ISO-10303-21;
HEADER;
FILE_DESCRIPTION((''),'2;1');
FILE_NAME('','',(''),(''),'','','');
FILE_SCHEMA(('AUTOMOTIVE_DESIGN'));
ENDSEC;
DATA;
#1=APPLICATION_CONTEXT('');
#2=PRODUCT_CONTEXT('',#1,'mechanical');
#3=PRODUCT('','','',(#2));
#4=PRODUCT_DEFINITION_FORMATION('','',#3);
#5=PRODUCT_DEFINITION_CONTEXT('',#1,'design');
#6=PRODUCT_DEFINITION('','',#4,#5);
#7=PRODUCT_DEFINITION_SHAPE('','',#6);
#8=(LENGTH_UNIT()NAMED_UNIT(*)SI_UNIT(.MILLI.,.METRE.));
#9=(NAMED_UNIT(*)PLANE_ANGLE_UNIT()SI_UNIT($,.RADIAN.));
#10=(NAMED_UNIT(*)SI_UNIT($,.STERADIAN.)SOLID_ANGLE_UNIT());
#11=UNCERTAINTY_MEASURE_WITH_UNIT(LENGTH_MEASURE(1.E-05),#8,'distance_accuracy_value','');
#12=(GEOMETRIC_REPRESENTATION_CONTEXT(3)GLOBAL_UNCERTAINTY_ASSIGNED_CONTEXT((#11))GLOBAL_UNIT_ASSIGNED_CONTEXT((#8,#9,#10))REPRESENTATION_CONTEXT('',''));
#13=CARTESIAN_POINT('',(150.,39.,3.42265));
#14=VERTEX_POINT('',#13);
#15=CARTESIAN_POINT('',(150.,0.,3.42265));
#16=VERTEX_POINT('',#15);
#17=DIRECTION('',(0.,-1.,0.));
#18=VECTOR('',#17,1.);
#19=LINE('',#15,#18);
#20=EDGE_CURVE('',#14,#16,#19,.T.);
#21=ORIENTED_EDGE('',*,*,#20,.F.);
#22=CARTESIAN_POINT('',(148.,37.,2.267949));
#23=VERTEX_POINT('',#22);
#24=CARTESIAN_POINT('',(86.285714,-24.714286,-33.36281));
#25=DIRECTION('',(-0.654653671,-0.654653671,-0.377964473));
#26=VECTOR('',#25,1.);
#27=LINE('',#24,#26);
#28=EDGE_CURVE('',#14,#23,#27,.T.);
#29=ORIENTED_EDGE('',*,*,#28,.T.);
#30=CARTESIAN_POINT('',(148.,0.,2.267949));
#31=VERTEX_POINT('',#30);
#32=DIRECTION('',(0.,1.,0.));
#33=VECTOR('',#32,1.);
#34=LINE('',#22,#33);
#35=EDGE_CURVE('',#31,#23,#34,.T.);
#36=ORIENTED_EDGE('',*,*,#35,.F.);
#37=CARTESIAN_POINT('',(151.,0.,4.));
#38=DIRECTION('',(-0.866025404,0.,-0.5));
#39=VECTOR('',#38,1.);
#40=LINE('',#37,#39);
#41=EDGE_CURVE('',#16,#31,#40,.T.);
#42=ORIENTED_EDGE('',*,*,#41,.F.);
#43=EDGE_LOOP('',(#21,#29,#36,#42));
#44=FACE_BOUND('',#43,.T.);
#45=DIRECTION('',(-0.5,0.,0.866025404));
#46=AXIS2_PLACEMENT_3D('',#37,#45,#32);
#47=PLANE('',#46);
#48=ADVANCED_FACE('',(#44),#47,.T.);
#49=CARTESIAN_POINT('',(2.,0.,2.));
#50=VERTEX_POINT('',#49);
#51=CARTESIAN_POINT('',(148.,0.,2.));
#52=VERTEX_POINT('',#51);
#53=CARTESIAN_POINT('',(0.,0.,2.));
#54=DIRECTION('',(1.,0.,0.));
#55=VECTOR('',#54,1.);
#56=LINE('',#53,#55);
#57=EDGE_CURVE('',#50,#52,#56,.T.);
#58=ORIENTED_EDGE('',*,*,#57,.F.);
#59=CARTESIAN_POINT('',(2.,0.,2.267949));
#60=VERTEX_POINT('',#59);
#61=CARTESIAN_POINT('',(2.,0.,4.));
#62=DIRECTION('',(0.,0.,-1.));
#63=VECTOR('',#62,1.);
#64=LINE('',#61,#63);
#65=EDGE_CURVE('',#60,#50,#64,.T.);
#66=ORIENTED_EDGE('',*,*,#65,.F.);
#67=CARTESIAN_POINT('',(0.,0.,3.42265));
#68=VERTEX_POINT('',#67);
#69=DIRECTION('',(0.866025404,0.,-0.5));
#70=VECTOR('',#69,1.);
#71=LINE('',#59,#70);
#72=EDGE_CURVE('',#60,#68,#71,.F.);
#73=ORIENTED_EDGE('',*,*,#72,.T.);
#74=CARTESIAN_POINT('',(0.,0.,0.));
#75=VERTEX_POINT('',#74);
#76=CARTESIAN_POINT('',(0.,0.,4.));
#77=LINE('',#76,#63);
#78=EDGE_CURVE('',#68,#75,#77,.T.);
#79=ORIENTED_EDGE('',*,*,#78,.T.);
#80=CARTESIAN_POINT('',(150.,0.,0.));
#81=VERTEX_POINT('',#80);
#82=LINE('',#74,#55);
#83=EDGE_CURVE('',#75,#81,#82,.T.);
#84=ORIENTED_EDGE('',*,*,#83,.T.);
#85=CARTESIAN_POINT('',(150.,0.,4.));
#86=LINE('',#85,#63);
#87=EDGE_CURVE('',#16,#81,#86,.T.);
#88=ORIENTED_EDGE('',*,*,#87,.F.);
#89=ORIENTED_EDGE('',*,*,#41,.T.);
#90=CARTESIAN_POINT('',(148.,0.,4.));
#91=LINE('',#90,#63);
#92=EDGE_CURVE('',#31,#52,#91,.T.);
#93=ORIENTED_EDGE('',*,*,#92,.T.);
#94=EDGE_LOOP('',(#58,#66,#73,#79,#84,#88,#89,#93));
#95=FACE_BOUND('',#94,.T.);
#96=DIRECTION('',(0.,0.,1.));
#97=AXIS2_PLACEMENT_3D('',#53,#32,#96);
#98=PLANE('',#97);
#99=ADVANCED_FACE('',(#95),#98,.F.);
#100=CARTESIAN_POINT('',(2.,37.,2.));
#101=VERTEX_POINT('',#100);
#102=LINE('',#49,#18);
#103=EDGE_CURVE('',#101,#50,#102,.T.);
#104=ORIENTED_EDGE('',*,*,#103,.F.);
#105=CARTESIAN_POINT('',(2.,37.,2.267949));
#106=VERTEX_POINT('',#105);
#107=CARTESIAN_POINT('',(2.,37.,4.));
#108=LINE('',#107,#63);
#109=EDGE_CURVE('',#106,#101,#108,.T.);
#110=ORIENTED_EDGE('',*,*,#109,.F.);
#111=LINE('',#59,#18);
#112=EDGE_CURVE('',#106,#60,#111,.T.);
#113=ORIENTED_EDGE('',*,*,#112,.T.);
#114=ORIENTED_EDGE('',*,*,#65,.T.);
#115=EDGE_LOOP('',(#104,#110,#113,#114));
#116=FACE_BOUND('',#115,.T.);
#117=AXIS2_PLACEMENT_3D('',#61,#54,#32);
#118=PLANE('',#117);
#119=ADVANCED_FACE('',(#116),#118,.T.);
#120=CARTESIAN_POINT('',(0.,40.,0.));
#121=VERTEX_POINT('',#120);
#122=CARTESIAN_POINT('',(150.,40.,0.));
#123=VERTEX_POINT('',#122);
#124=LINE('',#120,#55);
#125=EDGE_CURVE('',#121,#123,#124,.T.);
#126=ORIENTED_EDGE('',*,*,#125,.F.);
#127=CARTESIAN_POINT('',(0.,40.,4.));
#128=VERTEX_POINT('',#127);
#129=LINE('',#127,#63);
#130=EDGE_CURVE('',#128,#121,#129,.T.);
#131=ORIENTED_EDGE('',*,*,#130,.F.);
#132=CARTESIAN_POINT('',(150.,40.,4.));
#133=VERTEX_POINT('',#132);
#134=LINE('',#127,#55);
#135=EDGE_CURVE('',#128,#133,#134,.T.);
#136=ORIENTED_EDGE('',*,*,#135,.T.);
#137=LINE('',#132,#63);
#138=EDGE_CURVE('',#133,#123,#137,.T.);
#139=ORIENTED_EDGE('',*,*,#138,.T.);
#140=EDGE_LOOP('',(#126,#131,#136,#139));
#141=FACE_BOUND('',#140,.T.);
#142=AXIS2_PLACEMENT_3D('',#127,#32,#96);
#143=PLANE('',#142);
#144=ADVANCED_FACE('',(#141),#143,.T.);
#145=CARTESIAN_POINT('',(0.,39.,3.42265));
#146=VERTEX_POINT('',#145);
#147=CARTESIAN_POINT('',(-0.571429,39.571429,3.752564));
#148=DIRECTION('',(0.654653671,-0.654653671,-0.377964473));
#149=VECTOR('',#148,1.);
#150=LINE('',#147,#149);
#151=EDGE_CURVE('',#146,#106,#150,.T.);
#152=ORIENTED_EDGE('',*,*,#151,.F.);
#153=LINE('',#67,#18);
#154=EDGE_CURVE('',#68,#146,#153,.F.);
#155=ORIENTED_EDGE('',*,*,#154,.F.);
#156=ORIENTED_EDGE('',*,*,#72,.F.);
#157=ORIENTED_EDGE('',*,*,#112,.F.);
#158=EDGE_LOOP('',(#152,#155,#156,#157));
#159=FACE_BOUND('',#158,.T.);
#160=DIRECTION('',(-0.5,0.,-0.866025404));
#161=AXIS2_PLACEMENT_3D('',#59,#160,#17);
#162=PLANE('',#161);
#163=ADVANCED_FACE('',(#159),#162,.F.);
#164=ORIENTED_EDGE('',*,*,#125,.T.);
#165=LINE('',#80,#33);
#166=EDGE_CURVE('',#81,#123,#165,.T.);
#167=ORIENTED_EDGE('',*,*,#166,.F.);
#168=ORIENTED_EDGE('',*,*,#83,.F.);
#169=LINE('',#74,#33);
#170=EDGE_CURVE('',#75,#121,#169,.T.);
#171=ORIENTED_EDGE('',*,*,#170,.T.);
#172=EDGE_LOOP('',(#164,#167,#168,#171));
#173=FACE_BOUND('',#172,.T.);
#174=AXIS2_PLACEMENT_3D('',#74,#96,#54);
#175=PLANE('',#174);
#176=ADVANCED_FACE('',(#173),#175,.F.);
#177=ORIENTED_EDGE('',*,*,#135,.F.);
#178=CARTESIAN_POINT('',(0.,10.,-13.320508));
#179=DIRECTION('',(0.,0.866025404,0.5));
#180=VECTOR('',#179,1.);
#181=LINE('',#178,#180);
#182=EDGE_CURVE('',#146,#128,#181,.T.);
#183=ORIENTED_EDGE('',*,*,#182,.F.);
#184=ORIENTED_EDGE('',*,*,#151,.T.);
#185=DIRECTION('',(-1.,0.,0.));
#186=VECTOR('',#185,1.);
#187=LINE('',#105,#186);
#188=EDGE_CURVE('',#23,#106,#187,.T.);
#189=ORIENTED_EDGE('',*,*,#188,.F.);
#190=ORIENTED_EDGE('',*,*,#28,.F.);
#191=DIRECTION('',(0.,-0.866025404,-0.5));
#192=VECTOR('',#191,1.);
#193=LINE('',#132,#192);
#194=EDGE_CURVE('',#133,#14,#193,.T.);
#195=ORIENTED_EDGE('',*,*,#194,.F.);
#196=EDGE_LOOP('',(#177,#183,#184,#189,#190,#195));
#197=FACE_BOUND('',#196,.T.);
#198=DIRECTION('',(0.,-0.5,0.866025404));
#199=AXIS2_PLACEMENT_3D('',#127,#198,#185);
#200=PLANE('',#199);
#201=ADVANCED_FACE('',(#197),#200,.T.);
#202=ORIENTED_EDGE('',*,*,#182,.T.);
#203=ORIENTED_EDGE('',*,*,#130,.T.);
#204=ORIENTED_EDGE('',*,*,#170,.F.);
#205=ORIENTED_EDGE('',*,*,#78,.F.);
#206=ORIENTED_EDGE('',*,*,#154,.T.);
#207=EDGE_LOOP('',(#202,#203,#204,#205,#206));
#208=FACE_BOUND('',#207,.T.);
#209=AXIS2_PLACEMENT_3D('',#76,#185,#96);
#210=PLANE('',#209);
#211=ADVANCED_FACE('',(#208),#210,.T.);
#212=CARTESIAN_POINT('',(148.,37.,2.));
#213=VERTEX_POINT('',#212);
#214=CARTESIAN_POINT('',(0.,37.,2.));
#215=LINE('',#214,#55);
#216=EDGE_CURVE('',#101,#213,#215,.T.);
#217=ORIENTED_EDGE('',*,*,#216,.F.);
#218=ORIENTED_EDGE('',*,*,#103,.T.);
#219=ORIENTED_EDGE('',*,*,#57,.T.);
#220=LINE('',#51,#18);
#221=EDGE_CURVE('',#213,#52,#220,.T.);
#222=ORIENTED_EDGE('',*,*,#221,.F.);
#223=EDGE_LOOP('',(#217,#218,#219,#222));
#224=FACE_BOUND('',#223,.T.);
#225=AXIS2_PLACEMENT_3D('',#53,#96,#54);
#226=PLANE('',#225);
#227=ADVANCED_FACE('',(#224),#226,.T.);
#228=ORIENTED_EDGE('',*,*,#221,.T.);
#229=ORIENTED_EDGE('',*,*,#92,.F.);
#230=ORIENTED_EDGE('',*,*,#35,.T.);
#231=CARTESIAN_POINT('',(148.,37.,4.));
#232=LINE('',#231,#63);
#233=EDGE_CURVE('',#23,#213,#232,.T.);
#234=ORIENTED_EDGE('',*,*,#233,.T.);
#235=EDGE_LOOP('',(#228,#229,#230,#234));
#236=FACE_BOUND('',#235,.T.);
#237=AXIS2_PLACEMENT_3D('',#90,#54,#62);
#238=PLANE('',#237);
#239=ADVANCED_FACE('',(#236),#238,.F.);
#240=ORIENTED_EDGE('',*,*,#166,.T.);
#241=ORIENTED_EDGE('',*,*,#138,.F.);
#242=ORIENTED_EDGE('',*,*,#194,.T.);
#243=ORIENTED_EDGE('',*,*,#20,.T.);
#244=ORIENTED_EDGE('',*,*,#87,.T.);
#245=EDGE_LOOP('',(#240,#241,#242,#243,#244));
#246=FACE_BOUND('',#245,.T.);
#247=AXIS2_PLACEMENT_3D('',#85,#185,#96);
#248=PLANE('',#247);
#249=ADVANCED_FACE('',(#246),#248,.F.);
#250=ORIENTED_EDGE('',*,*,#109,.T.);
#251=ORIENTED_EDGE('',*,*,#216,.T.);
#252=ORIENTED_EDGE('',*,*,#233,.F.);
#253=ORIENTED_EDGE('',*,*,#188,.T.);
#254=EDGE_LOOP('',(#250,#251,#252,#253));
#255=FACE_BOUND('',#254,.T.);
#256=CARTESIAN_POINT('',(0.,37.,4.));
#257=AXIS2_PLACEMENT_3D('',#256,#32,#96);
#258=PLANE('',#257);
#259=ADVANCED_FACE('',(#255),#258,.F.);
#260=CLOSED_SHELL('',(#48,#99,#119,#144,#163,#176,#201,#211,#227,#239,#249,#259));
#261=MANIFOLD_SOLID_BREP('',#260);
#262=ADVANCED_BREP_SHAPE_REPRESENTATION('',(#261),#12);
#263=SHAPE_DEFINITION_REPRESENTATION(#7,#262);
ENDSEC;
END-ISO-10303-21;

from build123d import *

# Parameters (mm, degrees)
SKETCH1_W           = 146
SKETCH1_H           = 37
BOSS_EXTRUDE1_DEPTH = 2
BOSS_EXTRUDE2_DEPTH = 4


with BuildPart() as part:
    # Sketch1 → Boss-Extrude1 (new body)
    with BuildSketch(Plane.XY):
        with Locations((75, 18.5)):
            Rectangle(SKETCH1_W, SKETCH1_H)
    extrude(amount=BOSS_EXTRUDE1_DEPTH)

    # Sketch1<4> → Boss-Extrude2 (add)
    with BuildSketch(Plane.XY):
        Polygon((2, 0), (2, 37), (148, 37), (148, 0), (150, 0), (150, 40), (0, 40), (0, 0), align=None)
    extrude(amount=BOSS_EXTRUDE2_DEPTH)

    # Chamfer1
    # the kernel refuses this chamfer: 3, 1.732050808 mm, written as the material it takes off along each edge
    with BuildSketch(Plane(origin=(148, 37, 4), x_dir=(-0.05789386240267211, 0, -0.9983227437537925), z_dir=(0, -1, 0)), Plane(origin=(2, 0, 4), x_dir=(0.05789386240267088, 0, -0.9983227437537927), z_dir=(0, 1, 0))) as chamfer1_piece_1:
        with BuildLine():
            Line((1.795061586, 0), (-0.239597459, 3.095243342))
            Line((-0.239597459, 3.095243342), (-0.299496823, 3.091769711))
            ThreePointArc((-0.299496823, 3.091769711), (-0.149748412, 1.545884855), (-0.059899365, -0.003473632))
            Line((-0.059899365, -0.003473632), (0.003473632, -0.059899365))
            ThreePointArc((0.003473632, -0.059899365), (0.897996171, -0.008024993), (1.798535218, -0.059899365))
            Line((1.798535218, -0.059899365), (1.795061586, 0))
        make_face()
    extrude(amount=37, mode=Mode.SUBTRACT)
    with BuildSketch(Plane(origin=(2, 37, 4), x_dir=(0, -0.05789386240267211, -0.9983227437537925), z_dir=(1, 0, 0))) as chamfer1_piece_2:
        with BuildLine():
            Line((1.795061586, 0), (-0.239597459, 3.095243342))
            Line((-0.239597459, 3.095243342), (-0.299496823, 3.091769711))
            ThreePointArc((-0.299496823, 3.091769711), (-0.149748412, 1.545884855), (-0.059899365, -0.003473632))
            Line((-0.059899365, -0.003473632), (0.003473632, -0.059899365))
            ThreePointArc((0.003473632, -0.059899365), (0.897996171, -0.008024993), (1.798535218, -0.059899365))
            Line((1.798535218, -0.059899365), (1.795061586, 0))
        make_face()
    extrude(amount=146, mode=Mode.SUBTRACT)
    with BuildSketch(Plane(origin=(148, 44.761257264, 4), x_dir=(-0.05789386240267211, 0, -0.9983227437537925), z_dir=(0, -1, 0))) as chamfer1_piece_3a_section:
        with BuildLine():
            Line((1.795061586, 0), (-0.239597459, 3.095243342))
            Line((-0.239597459, 3.095243342), (-0.299496823, 3.091769711))
            ThreePointArc((-0.299496823, 3.091769711), (-0.149748412, 1.545884855), (-0.059899365, -0.003473632))
            Line((-0.059899365, -0.003473632), (0.003473632, -0.059899365))
            ThreePointArc((0.003473632, -0.059899365), (0.897996171, -0.008024993), (1.798535218, -0.059899365))
            Line((1.798535218, -0.059899365), (1.795061586, 0))
        make_face()
    chamfer1_piece_3a = extrude(amount=44.761257264, mode=Mode.PRIVATE)
    chamfer1_piece_3a = split(chamfer1_piece_3a, bisect_by=Plane(origin=(149.006146815, 37, 3.444583449), z_dir=(0, 1, 0)), keep=Keep.TOP, mode=Mode.PRIVATE)
    with BuildSketch(Plane(origin=(2, 37, 4), x_dir=(0, -0.05789386240267211, -0.9983227437537925), z_dir=(1, 0, 0))) as chamfer1_piece_3b_section:
        with BuildLine():
            Line((1.795061586, 0), (-0.239597459, 3.095243342))
            Line((-0.239597459, 3.095243342), (-0.299496823, 3.091769711))
            ThreePointArc((-0.299496823, 3.091769711), (-0.149748412, 1.545884855), (-0.059899365, -0.003473632))
            Line((-0.059899365, -0.003473632), (0.003473632, -0.059899365))
            ThreePointArc((0.003473632, -0.059899365), (0.897996171, -0.008024993), (1.798535218, -0.059899365))
            Line((1.798535218, -0.059899365), (1.795061586, 0))
        make_face()
    chamfer1_piece_3b = extrude(amount=153.761257264, mode=Mode.PRIVATE)
    chamfer1_piece_3b = split(chamfer1_piece_3b, bisect_by=Plane(origin=(148, 38.006146815, 3.444583449), z_dir=(1, 0, 0)), keep=Keep.TOP, mode=Mode.PRIVATE)
    chamfer1_piece_3 = chamfer1_piece_3a & chamfer1_piece_3b
    add(chamfer1_piece_3, mode=Mode.SUBTRACT)
    with BuildSketch(Plane(origin=(-5.761257264, 37, 4), x_dir=(0, -0.05789386240267211, -0.9983227437537925), z_dir=(1, 0, 0))) as chamfer1_piece_4a_section:
        with BuildLine():
            Line((1.795061586, 0), (-0.239597459, 3.095243342))
            Line((-0.239597459, 3.095243342), (-0.299496823, 3.091769711))
            ThreePointArc((-0.299496823, 3.091769711), (-0.149748412, 1.545884855), (-0.059899365, -0.003473632))
            Line((-0.059899365, -0.003473632), (0.003473632, -0.059899365))
            ThreePointArc((0.003473632, -0.059899365), (0.897996171, -0.008024993), (1.798535218, -0.059899365))
            Line((1.798535218, -0.059899365), (1.795061586, 0))
        make_face()
    chamfer1_piece_4a = extrude(amount=153.761257264, mode=Mode.PRIVATE)
    chamfer1_piece_4a = split(chamfer1_piece_4a, bisect_by=Plane(origin=(2, 38.006146815, 3.444583449), z_dir=(-1, 0, 0)), keep=Keep.TOP, mode=Mode.PRIVATE)
    with BuildSketch(Plane(origin=(2, 0, 4), x_dir=(0.05789386240267088, 0, -0.9983227437537927), z_dir=(0, 1, 0))) as chamfer1_piece_4b_section:
        with BuildLine():
            Line((1.795061586, 0), (-0.239597459, 3.095243342))
            Line((-0.239597459, 3.095243342), (-0.299496823, 3.091769711))
            ThreePointArc((-0.299496823, 3.091769711), (-0.149748412, 1.545884855), (-0.059899365, -0.003473632))
            Line((-0.059899365, -0.003473632), (0.003473632, -0.059899365))
            ThreePointArc((0.003473632, -0.059899365), (0.897996171, -0.008024993), (1.798535218, -0.059899365))
            Line((1.798535218, -0.059899365), (1.795061586, 0))
        make_face()
    chamfer1_piece_4b = extrude(amount=44.761257264, mode=Mode.PRIVATE)
    chamfer1_piece_4b = split(chamfer1_piece_4b, bisect_by=Plane(origin=(0.993853185, 37, 3.444583449), z_dir=(0, 1, 0)), keep=Keep.TOP, mode=Mode.PRIVATE)
    chamfer1_piece_4 = chamfer1_piece_4a & chamfer1_piece_4b
    add(chamfer1_piece_4, mode=Mode.SUBTRACT)


solid = part.part
